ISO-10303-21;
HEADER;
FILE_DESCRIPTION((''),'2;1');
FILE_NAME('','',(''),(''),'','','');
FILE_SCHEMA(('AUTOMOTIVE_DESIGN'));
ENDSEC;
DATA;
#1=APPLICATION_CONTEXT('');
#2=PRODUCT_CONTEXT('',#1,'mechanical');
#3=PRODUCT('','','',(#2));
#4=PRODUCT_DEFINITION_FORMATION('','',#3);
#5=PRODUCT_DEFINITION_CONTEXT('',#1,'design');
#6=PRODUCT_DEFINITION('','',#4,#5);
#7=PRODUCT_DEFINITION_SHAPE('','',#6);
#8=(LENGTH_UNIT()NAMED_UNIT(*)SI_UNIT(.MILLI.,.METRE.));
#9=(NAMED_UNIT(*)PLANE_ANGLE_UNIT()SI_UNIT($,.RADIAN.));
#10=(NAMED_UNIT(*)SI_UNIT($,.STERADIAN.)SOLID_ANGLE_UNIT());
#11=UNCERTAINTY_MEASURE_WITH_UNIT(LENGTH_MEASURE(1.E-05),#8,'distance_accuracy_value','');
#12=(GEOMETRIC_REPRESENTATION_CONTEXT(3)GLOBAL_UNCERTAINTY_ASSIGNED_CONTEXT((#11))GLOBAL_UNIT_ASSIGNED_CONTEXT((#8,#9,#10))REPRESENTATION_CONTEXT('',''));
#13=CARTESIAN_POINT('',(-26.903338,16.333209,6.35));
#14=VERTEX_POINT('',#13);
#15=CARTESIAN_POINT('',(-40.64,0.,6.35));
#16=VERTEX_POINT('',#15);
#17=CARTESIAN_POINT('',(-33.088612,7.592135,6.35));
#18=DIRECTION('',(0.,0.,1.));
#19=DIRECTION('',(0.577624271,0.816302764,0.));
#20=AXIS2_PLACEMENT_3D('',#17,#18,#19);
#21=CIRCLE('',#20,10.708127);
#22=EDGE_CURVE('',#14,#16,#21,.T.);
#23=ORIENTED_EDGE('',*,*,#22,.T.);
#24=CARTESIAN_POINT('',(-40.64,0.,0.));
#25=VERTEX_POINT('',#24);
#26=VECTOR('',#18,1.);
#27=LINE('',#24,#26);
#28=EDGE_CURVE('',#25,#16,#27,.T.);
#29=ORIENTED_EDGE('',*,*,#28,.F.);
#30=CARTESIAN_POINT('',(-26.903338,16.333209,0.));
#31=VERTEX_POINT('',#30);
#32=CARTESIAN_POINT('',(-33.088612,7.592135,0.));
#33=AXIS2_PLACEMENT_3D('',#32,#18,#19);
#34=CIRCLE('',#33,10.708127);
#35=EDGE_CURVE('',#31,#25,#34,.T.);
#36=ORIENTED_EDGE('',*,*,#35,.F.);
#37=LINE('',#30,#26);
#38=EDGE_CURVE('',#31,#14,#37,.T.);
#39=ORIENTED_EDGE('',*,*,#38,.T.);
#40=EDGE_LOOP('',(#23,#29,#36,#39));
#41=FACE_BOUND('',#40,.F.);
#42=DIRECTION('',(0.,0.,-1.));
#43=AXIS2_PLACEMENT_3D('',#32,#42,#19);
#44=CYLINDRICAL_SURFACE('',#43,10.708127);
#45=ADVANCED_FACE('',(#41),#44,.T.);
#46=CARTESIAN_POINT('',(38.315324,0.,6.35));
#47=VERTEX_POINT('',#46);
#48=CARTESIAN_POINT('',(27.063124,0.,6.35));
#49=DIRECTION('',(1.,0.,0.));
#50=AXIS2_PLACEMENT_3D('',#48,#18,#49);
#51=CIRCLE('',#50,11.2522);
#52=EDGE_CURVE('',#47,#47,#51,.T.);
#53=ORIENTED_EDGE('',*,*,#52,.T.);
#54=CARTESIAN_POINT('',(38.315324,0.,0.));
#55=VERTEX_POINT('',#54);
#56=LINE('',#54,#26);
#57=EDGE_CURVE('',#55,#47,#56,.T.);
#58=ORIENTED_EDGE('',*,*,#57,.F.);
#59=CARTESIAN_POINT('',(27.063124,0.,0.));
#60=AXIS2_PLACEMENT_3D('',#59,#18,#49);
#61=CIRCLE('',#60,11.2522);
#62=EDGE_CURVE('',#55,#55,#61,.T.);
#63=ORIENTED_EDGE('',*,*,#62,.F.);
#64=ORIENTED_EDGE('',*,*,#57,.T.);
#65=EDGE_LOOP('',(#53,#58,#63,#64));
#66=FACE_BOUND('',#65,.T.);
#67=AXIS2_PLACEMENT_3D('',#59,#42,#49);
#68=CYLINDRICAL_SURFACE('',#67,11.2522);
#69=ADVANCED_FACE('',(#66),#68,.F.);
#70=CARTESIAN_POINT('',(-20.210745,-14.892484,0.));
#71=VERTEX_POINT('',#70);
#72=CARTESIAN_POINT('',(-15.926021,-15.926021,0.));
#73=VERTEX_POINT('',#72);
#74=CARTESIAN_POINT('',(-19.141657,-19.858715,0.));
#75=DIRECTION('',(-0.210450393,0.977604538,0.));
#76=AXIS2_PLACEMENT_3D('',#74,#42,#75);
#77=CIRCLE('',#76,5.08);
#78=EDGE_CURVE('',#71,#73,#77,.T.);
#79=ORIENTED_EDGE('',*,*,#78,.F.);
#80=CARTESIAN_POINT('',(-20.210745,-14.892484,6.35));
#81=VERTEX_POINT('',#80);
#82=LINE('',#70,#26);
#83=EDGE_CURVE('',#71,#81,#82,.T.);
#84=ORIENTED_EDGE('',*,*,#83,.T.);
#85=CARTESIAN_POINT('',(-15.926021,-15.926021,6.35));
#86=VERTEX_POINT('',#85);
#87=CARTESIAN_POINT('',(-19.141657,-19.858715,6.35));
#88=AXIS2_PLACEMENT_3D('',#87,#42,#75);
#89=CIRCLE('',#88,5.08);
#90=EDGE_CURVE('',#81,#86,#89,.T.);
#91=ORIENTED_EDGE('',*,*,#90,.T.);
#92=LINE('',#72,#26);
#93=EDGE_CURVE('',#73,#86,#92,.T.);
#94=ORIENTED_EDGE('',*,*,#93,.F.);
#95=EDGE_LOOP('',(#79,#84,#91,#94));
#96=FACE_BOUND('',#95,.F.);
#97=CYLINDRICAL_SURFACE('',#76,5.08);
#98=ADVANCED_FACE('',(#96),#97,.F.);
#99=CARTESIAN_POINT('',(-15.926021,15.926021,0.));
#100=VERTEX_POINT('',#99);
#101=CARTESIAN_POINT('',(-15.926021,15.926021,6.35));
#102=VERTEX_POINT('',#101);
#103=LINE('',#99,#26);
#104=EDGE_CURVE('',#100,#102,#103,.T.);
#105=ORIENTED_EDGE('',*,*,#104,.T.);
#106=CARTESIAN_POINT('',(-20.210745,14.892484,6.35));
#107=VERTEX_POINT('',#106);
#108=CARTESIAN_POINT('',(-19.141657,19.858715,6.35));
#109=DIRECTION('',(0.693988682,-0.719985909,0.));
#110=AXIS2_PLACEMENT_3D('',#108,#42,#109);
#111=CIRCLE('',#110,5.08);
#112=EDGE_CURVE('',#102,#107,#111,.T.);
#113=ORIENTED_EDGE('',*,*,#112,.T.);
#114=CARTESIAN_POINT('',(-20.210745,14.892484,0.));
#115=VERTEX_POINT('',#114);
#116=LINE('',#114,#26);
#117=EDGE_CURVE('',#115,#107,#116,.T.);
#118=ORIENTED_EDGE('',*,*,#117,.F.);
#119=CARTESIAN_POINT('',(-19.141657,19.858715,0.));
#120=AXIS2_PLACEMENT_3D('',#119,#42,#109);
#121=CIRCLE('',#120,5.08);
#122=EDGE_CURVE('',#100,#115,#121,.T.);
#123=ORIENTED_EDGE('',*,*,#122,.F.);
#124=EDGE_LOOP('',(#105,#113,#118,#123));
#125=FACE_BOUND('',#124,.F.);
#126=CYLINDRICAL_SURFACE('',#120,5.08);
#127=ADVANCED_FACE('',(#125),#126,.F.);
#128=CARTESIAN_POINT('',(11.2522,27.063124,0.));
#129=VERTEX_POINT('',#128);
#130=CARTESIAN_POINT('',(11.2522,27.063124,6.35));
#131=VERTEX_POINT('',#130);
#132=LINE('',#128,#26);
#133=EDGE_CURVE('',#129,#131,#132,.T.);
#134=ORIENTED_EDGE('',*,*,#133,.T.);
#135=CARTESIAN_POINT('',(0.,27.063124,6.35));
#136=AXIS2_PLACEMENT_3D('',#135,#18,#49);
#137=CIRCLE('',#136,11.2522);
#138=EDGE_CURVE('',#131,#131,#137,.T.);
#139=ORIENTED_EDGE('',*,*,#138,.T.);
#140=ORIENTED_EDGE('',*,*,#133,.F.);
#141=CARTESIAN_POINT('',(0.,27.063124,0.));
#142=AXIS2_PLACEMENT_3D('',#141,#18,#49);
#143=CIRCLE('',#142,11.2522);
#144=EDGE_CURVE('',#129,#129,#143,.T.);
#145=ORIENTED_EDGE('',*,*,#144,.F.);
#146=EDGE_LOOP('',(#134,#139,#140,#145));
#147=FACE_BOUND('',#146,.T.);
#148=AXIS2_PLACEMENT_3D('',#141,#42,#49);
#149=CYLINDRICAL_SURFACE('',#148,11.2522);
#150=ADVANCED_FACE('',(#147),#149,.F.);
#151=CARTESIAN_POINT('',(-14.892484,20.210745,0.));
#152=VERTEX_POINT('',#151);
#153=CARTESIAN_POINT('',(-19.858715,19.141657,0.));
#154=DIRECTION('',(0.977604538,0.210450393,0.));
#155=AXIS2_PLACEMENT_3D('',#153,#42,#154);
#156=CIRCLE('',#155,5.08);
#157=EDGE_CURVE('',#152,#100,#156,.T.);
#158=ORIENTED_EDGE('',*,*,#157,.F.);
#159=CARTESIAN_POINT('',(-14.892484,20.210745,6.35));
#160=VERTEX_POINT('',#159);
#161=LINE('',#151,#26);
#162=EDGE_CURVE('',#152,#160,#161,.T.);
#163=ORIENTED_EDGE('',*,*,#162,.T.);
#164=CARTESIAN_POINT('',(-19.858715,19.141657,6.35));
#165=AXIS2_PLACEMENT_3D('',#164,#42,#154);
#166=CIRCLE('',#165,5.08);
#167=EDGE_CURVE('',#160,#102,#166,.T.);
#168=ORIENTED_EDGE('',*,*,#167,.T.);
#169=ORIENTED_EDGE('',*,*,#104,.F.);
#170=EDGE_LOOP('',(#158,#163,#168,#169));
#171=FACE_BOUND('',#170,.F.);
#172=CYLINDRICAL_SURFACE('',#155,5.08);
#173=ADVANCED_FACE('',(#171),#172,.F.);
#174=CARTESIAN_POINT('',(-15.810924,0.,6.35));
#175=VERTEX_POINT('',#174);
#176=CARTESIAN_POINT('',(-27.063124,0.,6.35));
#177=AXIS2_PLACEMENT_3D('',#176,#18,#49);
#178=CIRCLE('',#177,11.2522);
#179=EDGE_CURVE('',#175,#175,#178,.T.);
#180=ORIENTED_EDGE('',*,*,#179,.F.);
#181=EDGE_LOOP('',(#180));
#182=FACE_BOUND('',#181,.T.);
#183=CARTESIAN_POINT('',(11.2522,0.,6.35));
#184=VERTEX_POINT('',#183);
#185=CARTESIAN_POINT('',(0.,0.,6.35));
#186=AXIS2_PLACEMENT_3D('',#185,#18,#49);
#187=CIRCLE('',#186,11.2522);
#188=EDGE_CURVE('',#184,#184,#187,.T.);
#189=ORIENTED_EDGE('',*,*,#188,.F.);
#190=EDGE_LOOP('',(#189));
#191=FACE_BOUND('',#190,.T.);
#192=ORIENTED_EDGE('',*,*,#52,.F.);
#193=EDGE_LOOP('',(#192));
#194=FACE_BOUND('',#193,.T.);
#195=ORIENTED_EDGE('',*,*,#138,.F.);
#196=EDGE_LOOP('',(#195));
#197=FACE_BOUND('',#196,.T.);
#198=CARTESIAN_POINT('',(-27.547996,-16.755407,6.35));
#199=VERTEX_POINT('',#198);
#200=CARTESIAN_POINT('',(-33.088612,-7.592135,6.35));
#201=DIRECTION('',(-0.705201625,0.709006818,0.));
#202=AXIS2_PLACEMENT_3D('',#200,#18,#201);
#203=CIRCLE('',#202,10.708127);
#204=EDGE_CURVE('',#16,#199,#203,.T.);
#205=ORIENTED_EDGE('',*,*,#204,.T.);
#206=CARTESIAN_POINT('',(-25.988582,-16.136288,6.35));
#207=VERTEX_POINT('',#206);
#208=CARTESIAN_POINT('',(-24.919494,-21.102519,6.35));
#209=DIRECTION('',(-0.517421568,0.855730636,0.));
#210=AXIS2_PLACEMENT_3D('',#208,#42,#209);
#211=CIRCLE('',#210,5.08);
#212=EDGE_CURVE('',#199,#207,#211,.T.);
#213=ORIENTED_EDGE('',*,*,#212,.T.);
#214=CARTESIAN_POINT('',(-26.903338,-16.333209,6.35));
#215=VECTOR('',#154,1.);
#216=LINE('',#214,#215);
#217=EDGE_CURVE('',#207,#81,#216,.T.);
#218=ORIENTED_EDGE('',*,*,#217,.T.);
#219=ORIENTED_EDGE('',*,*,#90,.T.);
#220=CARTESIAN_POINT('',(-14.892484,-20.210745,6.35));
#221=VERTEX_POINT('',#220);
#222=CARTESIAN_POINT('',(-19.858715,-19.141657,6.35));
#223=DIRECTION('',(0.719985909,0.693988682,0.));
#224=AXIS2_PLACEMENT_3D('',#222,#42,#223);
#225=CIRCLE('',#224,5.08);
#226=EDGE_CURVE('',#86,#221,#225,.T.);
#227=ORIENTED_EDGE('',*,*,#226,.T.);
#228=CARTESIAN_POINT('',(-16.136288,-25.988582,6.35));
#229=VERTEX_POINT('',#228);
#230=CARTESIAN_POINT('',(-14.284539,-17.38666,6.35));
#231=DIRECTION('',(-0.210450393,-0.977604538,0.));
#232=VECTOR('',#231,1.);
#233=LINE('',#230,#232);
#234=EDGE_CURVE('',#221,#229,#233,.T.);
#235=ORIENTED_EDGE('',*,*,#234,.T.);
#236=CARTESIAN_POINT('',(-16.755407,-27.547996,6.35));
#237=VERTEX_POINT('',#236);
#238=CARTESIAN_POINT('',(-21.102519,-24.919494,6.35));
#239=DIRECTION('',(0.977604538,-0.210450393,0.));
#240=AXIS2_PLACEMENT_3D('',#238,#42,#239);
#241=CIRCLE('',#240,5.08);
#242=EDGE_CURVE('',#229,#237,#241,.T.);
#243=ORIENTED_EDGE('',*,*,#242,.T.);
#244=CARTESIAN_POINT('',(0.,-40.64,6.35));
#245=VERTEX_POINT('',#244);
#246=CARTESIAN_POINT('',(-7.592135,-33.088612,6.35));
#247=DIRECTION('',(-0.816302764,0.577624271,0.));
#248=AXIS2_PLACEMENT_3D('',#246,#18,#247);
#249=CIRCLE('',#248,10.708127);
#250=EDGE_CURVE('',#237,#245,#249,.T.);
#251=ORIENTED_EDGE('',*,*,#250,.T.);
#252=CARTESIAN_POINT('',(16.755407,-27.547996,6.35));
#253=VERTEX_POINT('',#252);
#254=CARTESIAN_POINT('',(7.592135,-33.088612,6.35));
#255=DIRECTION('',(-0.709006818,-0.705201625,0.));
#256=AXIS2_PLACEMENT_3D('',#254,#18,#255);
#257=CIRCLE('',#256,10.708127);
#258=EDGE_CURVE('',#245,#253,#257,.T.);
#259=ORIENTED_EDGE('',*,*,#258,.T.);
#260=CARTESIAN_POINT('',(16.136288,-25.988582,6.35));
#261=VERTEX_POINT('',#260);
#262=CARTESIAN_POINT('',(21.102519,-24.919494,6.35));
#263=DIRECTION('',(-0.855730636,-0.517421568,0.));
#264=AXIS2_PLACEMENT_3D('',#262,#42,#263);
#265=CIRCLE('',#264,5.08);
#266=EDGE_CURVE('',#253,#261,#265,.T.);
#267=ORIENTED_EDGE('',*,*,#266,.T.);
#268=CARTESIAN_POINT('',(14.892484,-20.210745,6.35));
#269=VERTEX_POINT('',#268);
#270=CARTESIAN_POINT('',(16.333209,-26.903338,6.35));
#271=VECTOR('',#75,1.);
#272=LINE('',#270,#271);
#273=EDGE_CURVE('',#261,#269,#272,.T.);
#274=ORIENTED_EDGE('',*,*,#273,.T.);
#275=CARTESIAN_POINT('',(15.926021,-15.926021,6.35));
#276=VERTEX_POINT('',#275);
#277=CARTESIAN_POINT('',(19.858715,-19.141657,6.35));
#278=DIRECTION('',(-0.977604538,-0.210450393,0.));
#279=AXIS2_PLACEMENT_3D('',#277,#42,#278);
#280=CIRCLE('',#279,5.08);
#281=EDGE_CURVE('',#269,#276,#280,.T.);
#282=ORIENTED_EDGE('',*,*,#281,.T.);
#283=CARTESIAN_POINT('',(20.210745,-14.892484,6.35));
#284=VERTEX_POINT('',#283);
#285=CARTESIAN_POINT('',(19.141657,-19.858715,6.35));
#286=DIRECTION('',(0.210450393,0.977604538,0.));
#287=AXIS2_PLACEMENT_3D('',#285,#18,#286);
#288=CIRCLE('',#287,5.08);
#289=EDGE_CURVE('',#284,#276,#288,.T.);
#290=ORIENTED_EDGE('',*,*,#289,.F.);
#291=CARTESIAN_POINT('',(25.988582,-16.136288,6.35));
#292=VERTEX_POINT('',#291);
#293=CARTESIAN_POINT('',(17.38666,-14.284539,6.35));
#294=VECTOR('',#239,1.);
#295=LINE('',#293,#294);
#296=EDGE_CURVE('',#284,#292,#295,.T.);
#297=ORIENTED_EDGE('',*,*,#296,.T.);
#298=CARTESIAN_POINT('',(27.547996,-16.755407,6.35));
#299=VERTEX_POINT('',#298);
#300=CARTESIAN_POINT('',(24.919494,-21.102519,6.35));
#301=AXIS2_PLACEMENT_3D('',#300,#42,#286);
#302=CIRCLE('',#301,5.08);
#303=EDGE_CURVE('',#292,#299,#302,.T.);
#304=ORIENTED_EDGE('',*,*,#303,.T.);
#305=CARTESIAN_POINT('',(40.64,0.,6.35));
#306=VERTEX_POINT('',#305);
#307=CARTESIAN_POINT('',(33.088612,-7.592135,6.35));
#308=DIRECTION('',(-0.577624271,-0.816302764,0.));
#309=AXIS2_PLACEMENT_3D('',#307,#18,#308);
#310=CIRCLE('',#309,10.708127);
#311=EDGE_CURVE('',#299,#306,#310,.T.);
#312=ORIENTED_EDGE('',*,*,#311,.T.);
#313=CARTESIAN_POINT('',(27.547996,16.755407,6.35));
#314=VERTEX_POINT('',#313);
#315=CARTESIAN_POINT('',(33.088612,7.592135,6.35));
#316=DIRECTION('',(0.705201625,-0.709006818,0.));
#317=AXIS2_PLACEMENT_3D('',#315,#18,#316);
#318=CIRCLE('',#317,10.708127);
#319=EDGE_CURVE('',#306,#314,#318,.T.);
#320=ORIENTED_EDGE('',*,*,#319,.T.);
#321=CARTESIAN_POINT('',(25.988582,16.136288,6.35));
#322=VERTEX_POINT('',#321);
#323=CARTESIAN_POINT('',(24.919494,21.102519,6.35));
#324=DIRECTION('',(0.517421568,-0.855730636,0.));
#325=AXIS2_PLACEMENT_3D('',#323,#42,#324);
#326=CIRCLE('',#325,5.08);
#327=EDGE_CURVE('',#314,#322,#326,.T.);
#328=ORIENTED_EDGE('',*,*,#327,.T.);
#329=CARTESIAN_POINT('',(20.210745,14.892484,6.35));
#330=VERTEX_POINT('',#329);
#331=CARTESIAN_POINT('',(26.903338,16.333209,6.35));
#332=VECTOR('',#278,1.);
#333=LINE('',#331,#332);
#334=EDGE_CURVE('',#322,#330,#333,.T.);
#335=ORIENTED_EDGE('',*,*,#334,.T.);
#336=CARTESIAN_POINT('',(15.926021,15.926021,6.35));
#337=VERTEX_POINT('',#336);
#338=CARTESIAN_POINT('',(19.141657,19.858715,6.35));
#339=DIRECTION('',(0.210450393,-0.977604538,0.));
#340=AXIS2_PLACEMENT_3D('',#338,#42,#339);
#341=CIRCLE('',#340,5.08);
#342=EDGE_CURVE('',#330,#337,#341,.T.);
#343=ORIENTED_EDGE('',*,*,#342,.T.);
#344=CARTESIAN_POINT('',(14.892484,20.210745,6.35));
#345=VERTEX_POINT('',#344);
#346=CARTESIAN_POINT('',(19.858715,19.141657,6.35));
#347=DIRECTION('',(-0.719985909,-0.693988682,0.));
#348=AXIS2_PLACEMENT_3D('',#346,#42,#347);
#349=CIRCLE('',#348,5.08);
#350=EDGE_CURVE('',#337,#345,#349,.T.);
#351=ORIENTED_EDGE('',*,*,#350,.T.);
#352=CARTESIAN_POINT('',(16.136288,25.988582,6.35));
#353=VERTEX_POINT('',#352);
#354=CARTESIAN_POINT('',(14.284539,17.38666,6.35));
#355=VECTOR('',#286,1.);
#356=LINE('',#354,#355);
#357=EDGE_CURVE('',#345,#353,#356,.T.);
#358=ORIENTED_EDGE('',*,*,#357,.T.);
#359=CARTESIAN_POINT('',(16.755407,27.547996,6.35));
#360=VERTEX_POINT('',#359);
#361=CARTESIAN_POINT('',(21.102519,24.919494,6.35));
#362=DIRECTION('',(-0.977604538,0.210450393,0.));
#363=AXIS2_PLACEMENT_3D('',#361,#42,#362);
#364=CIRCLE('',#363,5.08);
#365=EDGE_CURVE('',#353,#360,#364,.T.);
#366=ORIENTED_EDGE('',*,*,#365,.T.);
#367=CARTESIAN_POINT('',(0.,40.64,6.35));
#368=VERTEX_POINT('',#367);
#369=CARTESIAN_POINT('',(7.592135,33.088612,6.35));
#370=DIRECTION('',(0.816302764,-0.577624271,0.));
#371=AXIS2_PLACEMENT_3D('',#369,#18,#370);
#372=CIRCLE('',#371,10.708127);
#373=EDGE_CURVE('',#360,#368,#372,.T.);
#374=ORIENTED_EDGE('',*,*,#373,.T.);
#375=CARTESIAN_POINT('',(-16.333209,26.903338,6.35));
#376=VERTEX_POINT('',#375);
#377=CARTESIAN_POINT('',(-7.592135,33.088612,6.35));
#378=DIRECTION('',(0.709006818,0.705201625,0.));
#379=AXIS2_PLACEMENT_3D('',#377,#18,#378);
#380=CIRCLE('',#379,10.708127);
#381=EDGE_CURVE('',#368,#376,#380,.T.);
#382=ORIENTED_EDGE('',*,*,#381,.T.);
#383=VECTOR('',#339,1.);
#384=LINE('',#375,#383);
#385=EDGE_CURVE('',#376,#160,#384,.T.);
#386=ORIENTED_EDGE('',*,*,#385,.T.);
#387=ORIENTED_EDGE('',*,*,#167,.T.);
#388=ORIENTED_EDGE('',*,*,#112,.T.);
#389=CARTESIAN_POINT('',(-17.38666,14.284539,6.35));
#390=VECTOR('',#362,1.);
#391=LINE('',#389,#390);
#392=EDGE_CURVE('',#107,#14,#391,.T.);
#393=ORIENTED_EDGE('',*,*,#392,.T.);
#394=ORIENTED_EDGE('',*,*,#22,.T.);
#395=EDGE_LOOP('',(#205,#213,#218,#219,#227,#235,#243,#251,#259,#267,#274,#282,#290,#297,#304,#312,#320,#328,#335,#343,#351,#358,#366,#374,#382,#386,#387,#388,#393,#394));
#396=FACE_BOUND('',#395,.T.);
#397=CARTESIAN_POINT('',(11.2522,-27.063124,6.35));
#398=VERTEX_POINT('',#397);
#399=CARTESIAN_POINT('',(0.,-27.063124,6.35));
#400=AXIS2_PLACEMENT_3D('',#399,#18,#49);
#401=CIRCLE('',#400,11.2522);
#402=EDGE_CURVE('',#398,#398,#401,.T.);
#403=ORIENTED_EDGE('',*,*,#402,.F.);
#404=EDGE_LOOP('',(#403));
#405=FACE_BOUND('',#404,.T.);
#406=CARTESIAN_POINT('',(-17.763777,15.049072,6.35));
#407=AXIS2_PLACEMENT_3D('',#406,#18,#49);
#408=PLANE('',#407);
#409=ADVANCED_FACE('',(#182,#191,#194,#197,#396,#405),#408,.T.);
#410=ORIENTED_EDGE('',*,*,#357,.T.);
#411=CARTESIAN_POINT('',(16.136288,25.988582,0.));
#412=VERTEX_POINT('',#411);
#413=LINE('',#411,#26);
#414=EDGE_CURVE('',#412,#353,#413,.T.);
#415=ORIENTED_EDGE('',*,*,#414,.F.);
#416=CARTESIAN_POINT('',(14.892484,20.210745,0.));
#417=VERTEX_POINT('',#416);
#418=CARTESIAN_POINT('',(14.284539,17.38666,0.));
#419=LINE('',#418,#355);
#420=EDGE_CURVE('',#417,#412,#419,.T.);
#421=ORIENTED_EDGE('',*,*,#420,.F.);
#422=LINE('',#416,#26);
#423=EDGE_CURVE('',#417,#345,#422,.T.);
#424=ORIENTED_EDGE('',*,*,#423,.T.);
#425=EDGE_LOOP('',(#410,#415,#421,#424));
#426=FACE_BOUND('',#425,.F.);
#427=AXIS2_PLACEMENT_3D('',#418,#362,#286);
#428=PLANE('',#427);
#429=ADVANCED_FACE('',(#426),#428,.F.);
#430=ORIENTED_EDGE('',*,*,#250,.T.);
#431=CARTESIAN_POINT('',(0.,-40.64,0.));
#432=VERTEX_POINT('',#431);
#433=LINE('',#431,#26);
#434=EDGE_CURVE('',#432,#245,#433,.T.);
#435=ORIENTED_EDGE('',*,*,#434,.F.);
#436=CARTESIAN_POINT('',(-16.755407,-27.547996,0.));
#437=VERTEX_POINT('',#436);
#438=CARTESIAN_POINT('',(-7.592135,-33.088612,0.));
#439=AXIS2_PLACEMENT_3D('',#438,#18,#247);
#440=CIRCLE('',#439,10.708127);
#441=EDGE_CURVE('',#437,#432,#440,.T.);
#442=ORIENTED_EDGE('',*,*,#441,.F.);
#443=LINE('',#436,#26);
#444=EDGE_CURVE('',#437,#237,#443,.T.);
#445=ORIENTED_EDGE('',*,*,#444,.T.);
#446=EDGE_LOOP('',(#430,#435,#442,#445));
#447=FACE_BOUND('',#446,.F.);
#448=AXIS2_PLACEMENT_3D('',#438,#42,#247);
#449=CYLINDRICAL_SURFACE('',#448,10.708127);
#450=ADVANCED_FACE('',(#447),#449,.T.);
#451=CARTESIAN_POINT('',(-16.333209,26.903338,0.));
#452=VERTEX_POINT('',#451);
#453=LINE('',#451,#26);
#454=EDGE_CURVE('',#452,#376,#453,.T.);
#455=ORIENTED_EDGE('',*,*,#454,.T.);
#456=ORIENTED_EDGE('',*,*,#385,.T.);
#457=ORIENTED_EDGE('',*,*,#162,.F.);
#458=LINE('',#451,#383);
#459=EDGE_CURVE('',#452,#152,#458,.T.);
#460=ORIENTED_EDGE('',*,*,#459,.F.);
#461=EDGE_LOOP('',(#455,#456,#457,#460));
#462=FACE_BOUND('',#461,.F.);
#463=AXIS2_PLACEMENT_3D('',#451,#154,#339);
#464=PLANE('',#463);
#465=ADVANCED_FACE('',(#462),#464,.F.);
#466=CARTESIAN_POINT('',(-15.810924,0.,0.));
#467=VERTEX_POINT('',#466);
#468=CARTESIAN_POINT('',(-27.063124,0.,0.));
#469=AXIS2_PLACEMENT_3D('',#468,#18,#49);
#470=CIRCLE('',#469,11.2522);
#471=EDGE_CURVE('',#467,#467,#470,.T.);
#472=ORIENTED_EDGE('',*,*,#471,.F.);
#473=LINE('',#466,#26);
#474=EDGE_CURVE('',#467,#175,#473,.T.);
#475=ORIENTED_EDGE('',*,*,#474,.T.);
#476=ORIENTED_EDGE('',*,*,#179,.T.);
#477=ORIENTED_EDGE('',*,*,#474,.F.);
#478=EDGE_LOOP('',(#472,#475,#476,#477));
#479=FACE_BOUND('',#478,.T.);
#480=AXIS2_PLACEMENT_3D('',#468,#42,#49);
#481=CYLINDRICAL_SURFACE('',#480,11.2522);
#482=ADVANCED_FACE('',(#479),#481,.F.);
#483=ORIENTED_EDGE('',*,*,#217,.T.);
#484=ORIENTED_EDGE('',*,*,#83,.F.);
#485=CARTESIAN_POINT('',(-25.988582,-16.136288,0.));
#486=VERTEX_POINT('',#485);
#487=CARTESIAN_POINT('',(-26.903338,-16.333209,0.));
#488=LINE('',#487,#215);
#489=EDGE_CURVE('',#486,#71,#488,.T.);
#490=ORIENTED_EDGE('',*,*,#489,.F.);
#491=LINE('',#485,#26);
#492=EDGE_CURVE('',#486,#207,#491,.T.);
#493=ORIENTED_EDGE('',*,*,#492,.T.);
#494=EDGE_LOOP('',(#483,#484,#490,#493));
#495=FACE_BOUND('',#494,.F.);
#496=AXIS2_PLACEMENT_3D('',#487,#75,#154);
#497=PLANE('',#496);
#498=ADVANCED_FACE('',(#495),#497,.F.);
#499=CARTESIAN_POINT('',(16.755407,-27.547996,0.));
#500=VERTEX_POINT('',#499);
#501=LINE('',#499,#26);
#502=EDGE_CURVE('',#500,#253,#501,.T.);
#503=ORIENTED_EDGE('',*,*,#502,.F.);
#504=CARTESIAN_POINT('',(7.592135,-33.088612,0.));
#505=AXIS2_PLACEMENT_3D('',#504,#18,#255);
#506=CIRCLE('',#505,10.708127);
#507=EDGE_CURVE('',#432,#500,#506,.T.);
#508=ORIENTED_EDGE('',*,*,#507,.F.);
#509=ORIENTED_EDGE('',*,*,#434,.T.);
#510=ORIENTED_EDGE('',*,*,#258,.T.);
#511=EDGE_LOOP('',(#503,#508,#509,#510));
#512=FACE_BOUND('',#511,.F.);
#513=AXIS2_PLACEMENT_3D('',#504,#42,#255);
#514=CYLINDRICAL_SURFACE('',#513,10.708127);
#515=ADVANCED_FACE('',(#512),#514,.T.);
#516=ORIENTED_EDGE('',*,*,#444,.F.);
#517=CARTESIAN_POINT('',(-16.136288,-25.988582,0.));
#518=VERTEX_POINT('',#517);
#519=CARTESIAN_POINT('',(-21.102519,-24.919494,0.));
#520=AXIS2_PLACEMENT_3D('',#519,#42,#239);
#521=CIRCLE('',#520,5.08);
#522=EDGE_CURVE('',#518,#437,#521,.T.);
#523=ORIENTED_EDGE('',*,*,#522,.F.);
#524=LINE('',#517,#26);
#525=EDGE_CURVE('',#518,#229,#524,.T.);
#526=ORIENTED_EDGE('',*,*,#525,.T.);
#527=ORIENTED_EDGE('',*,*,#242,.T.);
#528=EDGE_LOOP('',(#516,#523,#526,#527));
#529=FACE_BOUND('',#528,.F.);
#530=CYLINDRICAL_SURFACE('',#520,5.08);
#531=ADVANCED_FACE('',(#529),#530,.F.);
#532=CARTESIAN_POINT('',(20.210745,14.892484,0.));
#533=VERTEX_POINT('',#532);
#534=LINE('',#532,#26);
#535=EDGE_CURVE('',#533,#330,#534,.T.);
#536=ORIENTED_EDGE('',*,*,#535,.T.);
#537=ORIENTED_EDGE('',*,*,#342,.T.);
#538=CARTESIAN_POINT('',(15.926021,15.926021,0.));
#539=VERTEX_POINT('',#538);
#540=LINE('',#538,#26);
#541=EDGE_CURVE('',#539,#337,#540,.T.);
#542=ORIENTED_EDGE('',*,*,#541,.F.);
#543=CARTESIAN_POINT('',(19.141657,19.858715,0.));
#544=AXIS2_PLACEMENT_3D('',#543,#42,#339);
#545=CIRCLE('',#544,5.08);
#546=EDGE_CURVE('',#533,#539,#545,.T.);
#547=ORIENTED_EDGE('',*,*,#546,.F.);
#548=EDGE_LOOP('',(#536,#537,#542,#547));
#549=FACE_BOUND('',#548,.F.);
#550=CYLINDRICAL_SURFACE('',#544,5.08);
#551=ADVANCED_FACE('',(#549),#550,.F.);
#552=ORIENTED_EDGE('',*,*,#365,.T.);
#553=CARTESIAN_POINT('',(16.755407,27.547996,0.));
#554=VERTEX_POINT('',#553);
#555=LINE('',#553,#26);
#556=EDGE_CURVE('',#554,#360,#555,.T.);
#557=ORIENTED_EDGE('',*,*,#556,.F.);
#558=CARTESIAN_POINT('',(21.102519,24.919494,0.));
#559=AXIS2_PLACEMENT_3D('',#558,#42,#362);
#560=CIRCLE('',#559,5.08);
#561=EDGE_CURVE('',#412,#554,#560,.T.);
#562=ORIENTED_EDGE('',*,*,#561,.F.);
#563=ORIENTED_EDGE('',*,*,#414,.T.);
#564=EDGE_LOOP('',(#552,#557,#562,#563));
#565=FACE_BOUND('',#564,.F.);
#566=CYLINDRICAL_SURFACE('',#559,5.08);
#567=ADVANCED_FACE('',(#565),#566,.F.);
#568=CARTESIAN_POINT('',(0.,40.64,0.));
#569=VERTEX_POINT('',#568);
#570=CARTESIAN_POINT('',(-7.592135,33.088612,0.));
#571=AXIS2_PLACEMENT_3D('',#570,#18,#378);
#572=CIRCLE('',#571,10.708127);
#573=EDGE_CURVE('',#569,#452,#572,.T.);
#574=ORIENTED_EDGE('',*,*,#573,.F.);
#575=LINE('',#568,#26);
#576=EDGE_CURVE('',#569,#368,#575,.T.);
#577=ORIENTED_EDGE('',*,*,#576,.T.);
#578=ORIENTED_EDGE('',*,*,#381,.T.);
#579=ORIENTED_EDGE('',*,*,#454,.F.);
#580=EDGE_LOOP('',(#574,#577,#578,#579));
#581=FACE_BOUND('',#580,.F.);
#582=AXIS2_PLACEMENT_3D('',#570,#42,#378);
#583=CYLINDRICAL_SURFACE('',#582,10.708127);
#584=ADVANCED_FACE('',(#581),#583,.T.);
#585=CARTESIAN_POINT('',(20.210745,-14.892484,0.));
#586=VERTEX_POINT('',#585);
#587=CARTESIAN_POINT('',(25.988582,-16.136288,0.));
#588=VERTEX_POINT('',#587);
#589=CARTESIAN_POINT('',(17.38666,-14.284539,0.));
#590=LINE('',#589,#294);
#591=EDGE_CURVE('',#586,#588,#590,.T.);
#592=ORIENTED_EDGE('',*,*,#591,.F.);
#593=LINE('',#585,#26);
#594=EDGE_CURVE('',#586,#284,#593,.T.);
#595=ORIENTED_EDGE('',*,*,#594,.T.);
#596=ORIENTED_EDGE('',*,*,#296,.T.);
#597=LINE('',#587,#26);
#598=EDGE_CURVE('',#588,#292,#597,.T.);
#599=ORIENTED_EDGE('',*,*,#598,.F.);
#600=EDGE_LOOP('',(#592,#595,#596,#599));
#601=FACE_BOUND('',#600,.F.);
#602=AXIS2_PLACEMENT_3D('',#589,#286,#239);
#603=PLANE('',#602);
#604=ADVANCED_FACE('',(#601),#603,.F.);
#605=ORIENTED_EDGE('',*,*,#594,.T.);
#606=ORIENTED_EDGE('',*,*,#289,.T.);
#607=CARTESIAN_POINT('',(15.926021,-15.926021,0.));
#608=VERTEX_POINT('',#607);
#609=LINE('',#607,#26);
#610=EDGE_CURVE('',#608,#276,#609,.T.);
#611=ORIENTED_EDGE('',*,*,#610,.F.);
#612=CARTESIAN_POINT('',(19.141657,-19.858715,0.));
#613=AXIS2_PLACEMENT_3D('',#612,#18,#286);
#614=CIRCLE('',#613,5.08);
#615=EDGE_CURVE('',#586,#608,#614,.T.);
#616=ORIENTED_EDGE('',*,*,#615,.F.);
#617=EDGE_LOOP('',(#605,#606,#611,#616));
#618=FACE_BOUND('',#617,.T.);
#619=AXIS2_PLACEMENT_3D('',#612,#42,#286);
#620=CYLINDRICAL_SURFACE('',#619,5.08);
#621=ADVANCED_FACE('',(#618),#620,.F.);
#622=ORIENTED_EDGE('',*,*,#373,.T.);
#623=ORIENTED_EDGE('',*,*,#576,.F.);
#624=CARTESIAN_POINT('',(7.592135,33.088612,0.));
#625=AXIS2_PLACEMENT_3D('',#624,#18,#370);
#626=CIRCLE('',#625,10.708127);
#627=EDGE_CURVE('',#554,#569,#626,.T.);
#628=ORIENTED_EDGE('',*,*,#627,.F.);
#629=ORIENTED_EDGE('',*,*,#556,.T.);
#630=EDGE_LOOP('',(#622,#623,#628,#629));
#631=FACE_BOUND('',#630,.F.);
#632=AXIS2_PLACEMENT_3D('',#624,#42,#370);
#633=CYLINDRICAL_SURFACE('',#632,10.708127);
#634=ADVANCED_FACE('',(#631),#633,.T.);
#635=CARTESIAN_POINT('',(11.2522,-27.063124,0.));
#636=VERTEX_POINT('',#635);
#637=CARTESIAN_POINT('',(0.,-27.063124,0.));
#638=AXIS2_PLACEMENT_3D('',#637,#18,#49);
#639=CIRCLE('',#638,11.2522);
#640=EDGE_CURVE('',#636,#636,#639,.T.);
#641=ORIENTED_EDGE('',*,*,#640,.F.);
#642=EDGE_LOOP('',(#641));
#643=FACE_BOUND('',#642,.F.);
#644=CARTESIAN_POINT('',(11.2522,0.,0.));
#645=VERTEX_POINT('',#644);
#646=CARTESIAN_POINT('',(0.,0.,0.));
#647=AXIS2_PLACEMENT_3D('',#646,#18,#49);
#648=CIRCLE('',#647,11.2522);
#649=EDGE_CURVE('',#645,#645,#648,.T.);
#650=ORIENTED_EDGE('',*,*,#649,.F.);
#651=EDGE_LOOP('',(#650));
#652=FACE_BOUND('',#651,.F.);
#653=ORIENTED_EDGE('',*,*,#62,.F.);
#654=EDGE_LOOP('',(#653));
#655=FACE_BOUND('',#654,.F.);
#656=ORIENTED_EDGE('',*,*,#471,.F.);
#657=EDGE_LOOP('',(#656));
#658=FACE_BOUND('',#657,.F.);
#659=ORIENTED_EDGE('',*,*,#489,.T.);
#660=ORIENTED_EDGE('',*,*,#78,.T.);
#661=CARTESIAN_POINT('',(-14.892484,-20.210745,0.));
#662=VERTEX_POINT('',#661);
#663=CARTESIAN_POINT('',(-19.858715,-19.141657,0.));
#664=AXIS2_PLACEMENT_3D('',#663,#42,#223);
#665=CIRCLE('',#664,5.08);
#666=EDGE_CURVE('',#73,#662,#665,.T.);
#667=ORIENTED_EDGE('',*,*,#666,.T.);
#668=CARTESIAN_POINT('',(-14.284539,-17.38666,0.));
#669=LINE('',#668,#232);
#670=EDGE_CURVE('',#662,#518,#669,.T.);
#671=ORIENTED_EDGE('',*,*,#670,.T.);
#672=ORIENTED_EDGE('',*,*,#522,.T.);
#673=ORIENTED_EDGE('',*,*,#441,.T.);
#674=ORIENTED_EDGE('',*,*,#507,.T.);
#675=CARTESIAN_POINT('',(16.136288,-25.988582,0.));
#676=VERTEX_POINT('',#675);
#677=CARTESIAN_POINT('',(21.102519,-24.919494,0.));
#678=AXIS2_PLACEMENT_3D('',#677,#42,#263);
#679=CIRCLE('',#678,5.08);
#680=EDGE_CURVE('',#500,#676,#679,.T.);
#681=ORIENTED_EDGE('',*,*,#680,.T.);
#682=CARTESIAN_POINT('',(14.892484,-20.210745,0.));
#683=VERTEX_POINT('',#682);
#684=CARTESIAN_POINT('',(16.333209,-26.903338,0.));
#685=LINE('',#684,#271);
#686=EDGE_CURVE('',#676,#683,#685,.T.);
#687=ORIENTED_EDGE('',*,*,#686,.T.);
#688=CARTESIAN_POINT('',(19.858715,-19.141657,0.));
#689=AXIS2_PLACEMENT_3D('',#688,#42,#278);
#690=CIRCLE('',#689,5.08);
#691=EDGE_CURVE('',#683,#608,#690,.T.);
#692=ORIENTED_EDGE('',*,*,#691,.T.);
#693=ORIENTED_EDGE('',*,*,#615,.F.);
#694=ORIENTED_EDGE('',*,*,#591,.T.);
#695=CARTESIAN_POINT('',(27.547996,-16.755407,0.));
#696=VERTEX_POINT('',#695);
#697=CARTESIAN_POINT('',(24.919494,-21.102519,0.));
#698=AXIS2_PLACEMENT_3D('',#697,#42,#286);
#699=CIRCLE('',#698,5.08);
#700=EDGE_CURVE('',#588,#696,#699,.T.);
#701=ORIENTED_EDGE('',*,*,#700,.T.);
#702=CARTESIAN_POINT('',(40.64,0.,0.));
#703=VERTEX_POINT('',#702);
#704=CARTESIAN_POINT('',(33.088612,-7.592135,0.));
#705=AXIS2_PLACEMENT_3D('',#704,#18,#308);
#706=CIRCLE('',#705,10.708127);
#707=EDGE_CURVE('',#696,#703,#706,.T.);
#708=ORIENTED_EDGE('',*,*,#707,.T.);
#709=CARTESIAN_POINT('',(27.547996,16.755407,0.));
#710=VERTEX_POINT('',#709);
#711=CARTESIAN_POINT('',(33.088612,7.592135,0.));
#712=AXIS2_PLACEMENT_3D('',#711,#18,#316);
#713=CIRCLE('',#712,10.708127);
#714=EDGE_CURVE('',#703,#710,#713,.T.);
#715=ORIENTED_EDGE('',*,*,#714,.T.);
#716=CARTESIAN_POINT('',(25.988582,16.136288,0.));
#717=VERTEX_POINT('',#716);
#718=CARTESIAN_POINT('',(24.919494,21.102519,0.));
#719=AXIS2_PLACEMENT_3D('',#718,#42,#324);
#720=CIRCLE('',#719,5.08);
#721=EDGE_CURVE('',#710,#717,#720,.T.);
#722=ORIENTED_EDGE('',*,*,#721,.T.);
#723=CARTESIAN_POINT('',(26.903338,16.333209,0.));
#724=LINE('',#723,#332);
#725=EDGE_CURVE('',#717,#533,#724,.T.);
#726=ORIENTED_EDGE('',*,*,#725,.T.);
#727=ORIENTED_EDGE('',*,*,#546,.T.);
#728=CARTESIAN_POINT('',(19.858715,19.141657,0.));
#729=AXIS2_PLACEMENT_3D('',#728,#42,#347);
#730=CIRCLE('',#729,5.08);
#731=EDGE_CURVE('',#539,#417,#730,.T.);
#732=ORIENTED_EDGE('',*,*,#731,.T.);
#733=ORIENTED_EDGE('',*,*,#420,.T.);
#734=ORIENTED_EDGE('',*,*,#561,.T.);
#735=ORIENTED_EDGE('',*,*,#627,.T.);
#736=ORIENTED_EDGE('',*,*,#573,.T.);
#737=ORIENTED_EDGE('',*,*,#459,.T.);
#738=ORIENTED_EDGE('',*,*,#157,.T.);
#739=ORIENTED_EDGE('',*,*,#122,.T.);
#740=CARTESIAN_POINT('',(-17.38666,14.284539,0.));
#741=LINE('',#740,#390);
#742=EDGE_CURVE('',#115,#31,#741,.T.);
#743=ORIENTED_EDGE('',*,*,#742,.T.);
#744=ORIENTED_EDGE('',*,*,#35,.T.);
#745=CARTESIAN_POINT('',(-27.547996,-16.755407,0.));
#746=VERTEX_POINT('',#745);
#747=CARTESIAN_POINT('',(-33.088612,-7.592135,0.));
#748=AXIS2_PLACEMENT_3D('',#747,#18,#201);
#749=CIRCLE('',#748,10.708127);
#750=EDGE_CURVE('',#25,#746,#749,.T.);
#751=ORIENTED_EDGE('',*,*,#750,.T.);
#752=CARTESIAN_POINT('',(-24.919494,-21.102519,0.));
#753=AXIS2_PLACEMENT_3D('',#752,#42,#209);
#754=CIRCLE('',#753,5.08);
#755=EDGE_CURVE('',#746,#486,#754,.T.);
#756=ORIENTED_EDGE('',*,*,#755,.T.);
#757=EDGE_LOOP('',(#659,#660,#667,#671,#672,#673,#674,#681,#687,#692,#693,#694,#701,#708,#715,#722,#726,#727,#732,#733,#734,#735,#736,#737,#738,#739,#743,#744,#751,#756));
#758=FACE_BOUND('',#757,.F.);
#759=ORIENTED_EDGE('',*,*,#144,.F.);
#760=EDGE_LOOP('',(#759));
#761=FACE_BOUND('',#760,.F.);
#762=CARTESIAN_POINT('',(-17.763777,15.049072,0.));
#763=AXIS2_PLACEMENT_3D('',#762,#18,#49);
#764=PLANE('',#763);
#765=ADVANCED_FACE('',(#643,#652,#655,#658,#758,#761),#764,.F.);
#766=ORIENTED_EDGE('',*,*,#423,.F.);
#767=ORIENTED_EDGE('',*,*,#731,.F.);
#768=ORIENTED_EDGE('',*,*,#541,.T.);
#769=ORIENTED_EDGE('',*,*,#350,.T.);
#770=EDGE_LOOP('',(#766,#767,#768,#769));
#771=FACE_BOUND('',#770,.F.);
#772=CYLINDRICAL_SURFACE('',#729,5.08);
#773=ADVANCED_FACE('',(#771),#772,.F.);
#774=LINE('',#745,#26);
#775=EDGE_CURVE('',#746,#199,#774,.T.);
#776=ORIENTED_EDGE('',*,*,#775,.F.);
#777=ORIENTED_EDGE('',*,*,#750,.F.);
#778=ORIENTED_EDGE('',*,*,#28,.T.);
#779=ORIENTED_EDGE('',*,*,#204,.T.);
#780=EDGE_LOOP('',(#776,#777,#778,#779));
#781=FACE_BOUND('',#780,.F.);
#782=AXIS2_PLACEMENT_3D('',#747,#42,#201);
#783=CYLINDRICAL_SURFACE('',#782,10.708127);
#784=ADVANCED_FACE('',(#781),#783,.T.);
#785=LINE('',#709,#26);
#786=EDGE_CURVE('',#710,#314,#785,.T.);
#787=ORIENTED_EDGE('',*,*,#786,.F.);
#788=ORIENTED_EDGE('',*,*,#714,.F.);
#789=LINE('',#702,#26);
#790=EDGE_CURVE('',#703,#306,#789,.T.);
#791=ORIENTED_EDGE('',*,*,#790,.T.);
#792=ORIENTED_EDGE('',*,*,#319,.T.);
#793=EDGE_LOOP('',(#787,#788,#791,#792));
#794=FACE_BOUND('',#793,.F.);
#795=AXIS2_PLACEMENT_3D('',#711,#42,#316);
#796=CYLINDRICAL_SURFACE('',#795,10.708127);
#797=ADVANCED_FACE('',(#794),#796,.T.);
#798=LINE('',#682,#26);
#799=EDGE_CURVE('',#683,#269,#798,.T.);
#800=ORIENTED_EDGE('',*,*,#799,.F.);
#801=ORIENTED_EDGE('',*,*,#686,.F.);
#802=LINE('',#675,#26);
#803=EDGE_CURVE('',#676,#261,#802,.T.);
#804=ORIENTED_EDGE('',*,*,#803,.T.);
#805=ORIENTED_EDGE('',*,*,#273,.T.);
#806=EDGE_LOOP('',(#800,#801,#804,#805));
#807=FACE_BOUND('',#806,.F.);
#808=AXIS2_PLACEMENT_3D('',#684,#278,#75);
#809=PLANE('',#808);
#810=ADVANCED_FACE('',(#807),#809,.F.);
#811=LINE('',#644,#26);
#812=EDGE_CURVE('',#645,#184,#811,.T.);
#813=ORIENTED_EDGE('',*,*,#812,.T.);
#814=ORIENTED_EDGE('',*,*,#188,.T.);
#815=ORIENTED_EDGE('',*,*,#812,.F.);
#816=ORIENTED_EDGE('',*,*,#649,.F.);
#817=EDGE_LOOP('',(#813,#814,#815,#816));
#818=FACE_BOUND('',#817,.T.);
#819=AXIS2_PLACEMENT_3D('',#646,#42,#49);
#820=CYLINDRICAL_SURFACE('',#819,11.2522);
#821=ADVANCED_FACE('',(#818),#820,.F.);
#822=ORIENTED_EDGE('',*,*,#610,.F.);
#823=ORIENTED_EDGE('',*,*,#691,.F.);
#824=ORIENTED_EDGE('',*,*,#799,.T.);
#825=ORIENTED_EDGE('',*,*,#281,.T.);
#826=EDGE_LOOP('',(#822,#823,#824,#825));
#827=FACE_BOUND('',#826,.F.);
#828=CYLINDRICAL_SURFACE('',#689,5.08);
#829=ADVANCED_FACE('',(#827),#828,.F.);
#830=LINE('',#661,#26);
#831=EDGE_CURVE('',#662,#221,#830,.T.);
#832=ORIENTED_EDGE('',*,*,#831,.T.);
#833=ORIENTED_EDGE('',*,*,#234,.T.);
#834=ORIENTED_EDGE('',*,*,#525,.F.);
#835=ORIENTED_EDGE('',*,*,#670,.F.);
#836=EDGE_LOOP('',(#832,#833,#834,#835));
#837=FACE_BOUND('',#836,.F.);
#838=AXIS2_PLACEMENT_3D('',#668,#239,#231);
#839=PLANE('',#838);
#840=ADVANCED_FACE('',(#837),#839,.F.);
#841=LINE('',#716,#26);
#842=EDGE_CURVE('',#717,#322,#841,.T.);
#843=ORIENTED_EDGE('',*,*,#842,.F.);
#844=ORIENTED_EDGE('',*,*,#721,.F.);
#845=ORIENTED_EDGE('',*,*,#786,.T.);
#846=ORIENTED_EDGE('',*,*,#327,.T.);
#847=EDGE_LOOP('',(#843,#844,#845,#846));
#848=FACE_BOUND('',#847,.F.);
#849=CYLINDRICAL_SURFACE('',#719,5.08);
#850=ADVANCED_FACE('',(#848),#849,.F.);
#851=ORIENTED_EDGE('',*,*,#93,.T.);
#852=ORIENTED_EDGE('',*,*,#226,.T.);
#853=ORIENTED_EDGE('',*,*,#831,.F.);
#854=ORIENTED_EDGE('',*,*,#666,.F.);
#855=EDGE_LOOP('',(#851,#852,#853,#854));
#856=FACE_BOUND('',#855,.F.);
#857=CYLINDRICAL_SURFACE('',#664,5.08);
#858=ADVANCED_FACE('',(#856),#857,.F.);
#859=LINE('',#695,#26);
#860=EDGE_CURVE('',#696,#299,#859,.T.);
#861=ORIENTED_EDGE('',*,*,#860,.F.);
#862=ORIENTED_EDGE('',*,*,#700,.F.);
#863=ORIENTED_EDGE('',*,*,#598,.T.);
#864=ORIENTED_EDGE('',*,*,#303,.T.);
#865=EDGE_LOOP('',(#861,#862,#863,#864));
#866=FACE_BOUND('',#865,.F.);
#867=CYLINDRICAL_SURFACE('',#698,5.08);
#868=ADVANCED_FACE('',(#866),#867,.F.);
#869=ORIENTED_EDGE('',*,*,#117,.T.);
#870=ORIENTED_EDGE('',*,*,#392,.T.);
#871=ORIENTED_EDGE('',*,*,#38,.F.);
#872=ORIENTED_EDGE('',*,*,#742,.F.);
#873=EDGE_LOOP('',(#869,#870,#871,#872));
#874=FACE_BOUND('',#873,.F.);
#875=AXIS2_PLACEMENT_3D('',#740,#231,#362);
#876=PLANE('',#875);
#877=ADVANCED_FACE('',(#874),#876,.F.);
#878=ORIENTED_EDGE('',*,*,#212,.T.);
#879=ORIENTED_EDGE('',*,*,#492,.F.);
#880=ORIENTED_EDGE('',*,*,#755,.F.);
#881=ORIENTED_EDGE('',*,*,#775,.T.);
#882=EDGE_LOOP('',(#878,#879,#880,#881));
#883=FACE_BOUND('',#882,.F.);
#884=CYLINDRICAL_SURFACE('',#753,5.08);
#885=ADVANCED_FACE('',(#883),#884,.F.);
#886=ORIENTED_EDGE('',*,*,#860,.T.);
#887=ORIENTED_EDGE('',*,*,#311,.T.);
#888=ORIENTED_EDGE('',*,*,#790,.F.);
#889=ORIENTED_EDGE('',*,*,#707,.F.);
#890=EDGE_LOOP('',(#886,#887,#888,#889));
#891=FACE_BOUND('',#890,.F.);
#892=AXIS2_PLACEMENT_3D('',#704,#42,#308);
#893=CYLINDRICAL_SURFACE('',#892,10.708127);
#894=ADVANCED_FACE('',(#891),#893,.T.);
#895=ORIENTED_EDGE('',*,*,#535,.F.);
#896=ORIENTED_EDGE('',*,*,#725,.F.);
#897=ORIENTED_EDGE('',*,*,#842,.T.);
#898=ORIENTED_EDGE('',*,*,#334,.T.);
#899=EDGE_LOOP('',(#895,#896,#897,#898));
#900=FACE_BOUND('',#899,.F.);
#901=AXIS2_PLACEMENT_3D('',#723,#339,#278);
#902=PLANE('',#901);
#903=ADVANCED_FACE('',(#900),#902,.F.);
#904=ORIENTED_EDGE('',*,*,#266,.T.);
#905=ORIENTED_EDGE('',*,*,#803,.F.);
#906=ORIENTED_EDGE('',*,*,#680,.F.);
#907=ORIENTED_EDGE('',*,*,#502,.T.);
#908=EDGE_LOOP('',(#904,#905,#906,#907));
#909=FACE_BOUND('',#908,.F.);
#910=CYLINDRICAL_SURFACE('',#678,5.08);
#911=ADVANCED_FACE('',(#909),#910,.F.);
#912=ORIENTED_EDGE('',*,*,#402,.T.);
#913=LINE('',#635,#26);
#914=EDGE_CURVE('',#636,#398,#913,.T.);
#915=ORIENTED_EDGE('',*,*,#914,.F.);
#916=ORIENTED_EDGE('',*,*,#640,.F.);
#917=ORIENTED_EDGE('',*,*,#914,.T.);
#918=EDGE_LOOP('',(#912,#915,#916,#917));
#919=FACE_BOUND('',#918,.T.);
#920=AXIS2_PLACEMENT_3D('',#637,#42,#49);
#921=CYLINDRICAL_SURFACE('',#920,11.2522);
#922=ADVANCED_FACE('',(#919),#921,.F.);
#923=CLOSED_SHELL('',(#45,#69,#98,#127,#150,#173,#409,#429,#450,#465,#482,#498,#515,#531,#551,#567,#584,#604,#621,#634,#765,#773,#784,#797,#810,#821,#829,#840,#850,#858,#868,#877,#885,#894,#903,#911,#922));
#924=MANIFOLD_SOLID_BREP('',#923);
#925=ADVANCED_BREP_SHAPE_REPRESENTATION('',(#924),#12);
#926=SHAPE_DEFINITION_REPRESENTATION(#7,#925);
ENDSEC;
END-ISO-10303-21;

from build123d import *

# Parameters (mm, degrees)
F0_R        = 11.2522
F1_DEPTH    = 6.35
F2_T1_DEPTH = 6.35


# Not quite as in the source:
# - a fillet or chamfer that OpenCascade refuses, or shapes differently, is made with other operations: its cross-section is extruded or revolved along the edge and cut away or added


with BuildPart() as f1:
    # F0 (on Top) → F1 (new body)
    with BuildSketch(Plane.XY):
        with BuildLine():
            Line((-16.3332085084, 26.9033375639), (-14.2845390508, 17.386659874))
            ThreePointArc((-14.2845390508, 17.386659874), (-15.9113795359, 15.9113795359), (-17.386659874, 14.2845390508))
            Line((-17.386659874, 14.2845390508), (-26.9033375639, 16.3332085084))
            ThreePointArc((-26.9033375639, 16.3332085084), (-41.2837315607, 14.4844486959), (-40.64, 0))
            ThreePointArc((-40.64, 0), (-41.2837315607, -14.4844486959), (-26.9033375639, -16.3332085084))
            Line((-26.9033375639, -16.3332085084), (-17.386659874, -14.2845390508))
            ThreePointArc((-17.386659874, -14.2845390508), (-15.9113795359, -15.9113795359), (-14.2845390508, -17.386659874))
            Line((-14.2845390508, -17.386659874), (-16.3332085084, -26.9033375639))
            ThreePointArc((-16.3332085084, -26.9033375639), (-14.4844486959, -41.2837315607), (0, -40.64))
            ThreePointArc((0, -40.64), (14.4844486959, -41.2837315607), (16.3332085084, -26.9033375639))
            Line((16.3332085084, -26.9033375639), (14.2845390508, -17.386659874))
            ThreePointArc((14.2845390508, -17.386659874), (15.9113795359, -15.9113795359), (17.386659874, -14.2845390508))
            Line((17.386659874, -14.2845390508), (26.9033375639, -16.3332085084))
            ThreePointArc((26.9033375639, -16.3332085084), (41.2837315607, -14.4844486959), (40.64, 0))
            ThreePointArc((40.64, 0), (41.2837315607, 14.4844486959), (26.9033375639, 16.3332085084))
            Line((26.9033375639, 16.3332085084), (17.386659874, 14.2845390508))
            ThreePointArc((17.386659874, 14.2845390508), (15.9113795359, 15.9113795359), (14.2845390508, 17.386659874))
            Line((14.2845390508, 17.386659874), (16.3332085084, 26.9033375639))
            ThreePointArc((16.3332085084, 26.9033375639), (14.4844486959, 41.2837315607), (0, 40.64))
            ThreePointArc((0, 40.64), (-14.4844486959, 41.2837315607), (-16.3332085084, 26.9033375639))
        make_face()
        with Locations((0, -27.0631238818)):
            Circle(F0_R, mode=Mode.SUBTRACT)
        with Locations((-27.0631238818, 0)):
            Circle(F0_R, mode=Mode.SUBTRACT)
        Circle(F0_R, mode=Mode.SUBTRACT)
        with Locations((27.0631238818, 0)):
            Circle(F0_R, mode=Mode.SUBTRACT)
        with Locations((0, 27.0631238818)):
            Circle(F0_R, mode=Mode.SUBTRACT)
    extrude(amount=F1_DEPTH)

    # F2: fillet of radius 5.08 on 14 edges, made by hand

    # F2_s2 → F2_t1 (join)
    with BuildSketch(Plane.XY):
        with BuildLine():
            ThreePointArc((-15.61619491, 16.2011868084), (-17.7500326172, 14.9730442969), (-20.2107454114, 14.8924841735))
            Line((-20.2107454114, 14.8924841735), (-17.386659874, 14.2845390508))
            ThreePointArc((-17.386659874, 14.2845390508), (-16.5292313987, 15.2685463237), (-15.61619491, 16.2011868084))
        make_face()
        with BuildLine():
            ThreePointArc((-14.8924841735, 20.2107454114), (-14.9730442969, 17.7500326172), (-16.2011868084, 15.61619491))
            ThreePointArc((-16.2011868084, 15.61619491), (-15.2685463237, 16.5292313987), (-14.2845390508, 17.386659874))
            Line((-14.2845390508, 17.386659874), (-14.8924841735, 20.2107454114))
        make_face()
        with BuildLine():
            ThreePointArc((20.2107454114, -14.8924841735), (17.7500326172, -14.9730442969), (15.61619491, -16.2011868084))
            ThreePointArc((15.61619491, -16.2011868084), (16.5292313987, -15.2685463237), (17.386659874, -14.2845390508))
            Line((17.386659874, -14.2845390508), (20.2107454114, -14.8924841735))
        make_face()
        with BuildLine():
            ThreePointArc((25.9885821775, -16.1362877465), (26.7940259506, -16.3810221446), (27.5479957457, -16.7554071673))
            ThreePointArc((27.5479957457, -16.7554071673), (27.221867498, -16.5501087977), (26.9033375639, -16.3332085084))
            Line((26.9033375639, -16.3332085084), (25.9885821775, -16.1362877465))
        make_face()
        with BuildLine():
            ThreePointArc((27.5479957457, 16.7554071673), (26.7940259506, 16.3810221446), (25.9885821775, 16.1362877465))
            Line((25.9885821775, 16.1362877465), (26.9033375639, 16.3332085084))
            ThreePointArc((26.9033375639, 16.3332085084), (27.221867498, 16.5501087977), (27.5479957457, 16.7554071673))
        make_face()
        with BuildLine():
            ThreePointArc((20.2107454114, 14.8924841735), (17.7500326172, 14.9730442969), (15.61619491, 16.2011868084))
            ThreePointArc((15.61619491, 16.2011868084), (16.5292313987, 15.2685463237), (17.386659874, 14.2845390508))
            Line((17.386659874, 14.2845390508), (20.2107454114, 14.8924841735))
        make_face()
        with BuildLine():
            ThreePointArc((16.2011868084, 15.61619491), (14.9730442969, 17.7500326172), (14.8924841735, 20.2107454114))
            Line((14.8924841735, 20.2107454114), (14.2845390508, 17.386659874))
            ThreePointArc((14.2845390508, 17.386659874), (15.2685463237, 16.5292313987), (16.2011868084, 15.61619491))
        make_face()
        with BuildLine():
            ThreePointArc((16.1362877465, 25.9885821775), (16.3810221446, 26.7940259506), (16.7554071673, 27.5479957457))
            ThreePointArc((16.7554071673, 27.5479957457), (16.5501087977, 27.221867498), (16.3332085084, 26.9033375639))
            Line((16.3332085084, 26.9033375639), (16.1362877465, 25.9885821775))
        make_face()
        with BuildLine():
            ThreePointArc((-27.5479957457, -16.7554071673), (-26.7940259506, -16.3810221446), (-25.9885821775, -16.1362877465))
            Line((-25.9885821775, -16.1362877465), (-26.9033375639, -16.3332085084))
            ThreePointArc((-26.9033375639, -16.3332085084), (-27.221867498, -16.5501087977), (-27.5479957457, -16.7554071673))
        make_face()
        with BuildLine():
            ThreePointArc((-20.2107454114, -14.8924841735), (-17.7500326172, -14.9730442969), (-15.61619491, -16.2011868084))
            ThreePointArc((-15.61619491, -16.2011868084), (-16.5292313987, -15.2685463237), (-17.386659874, -14.2845390508))
            Line((-17.386659874, -14.2845390508), (-20.2107454114, -14.8924841735))
        make_face()
        with BuildLine():
            ThreePointArc((-16.2011868084, -15.61619491), (-14.9730442969, -17.7500326172), (-14.8924841735, -20.2107454114))
            Line((-14.8924841735, -20.2107454114), (-14.2845390508, -17.386659874))
            ThreePointArc((-14.2845390508, -17.386659874), (-15.2685463237, -16.5292313987), (-16.2011868084, -15.61619491))
        make_face()
        with BuildLine():
            ThreePointArc((-16.1362877465, -25.9885821775), (-16.3810221446, -26.7940259506), (-16.7554071673, -27.5479957457))
            ThreePointArc((-16.7554071673, -27.5479957457), (-16.5501087977, -27.221867498), (-16.3332085084, -26.9033375639))
            Line((-16.3332085084, -26.9033375639), (-16.1362877465, -25.9885821775))
        make_face()
        with BuildLine():
            ThreePointArc((16.7554071673, -27.5479957457), (16.3810221446, -26.7940259506), (16.1362877465, -25.9885821775))
            Line((16.1362877465, -25.9885821775), (16.3332085084, -26.9033375639))
            ThreePointArc((16.3332085084, -26.9033375639), (16.5501087977, -27.221867498), (16.7554071673, -27.5479957457))
        make_face()
        with BuildLine():
            ThreePointArc((14.8924841735, -20.2107454114), (14.9730442969, -17.7500326172), (16.2011868084, -15.61619491))
            ThreePointArc((16.2011868084, -15.61619491), (15.2685463237, -16.5292313987), (14.2845390508, -17.386659874))
            Line((14.2845390508, -17.386659874), (14.8924841735, -20.2107454114))
        make_face()
    extrude(amount=F2_T1_DEPTH)


solid = f1.part
